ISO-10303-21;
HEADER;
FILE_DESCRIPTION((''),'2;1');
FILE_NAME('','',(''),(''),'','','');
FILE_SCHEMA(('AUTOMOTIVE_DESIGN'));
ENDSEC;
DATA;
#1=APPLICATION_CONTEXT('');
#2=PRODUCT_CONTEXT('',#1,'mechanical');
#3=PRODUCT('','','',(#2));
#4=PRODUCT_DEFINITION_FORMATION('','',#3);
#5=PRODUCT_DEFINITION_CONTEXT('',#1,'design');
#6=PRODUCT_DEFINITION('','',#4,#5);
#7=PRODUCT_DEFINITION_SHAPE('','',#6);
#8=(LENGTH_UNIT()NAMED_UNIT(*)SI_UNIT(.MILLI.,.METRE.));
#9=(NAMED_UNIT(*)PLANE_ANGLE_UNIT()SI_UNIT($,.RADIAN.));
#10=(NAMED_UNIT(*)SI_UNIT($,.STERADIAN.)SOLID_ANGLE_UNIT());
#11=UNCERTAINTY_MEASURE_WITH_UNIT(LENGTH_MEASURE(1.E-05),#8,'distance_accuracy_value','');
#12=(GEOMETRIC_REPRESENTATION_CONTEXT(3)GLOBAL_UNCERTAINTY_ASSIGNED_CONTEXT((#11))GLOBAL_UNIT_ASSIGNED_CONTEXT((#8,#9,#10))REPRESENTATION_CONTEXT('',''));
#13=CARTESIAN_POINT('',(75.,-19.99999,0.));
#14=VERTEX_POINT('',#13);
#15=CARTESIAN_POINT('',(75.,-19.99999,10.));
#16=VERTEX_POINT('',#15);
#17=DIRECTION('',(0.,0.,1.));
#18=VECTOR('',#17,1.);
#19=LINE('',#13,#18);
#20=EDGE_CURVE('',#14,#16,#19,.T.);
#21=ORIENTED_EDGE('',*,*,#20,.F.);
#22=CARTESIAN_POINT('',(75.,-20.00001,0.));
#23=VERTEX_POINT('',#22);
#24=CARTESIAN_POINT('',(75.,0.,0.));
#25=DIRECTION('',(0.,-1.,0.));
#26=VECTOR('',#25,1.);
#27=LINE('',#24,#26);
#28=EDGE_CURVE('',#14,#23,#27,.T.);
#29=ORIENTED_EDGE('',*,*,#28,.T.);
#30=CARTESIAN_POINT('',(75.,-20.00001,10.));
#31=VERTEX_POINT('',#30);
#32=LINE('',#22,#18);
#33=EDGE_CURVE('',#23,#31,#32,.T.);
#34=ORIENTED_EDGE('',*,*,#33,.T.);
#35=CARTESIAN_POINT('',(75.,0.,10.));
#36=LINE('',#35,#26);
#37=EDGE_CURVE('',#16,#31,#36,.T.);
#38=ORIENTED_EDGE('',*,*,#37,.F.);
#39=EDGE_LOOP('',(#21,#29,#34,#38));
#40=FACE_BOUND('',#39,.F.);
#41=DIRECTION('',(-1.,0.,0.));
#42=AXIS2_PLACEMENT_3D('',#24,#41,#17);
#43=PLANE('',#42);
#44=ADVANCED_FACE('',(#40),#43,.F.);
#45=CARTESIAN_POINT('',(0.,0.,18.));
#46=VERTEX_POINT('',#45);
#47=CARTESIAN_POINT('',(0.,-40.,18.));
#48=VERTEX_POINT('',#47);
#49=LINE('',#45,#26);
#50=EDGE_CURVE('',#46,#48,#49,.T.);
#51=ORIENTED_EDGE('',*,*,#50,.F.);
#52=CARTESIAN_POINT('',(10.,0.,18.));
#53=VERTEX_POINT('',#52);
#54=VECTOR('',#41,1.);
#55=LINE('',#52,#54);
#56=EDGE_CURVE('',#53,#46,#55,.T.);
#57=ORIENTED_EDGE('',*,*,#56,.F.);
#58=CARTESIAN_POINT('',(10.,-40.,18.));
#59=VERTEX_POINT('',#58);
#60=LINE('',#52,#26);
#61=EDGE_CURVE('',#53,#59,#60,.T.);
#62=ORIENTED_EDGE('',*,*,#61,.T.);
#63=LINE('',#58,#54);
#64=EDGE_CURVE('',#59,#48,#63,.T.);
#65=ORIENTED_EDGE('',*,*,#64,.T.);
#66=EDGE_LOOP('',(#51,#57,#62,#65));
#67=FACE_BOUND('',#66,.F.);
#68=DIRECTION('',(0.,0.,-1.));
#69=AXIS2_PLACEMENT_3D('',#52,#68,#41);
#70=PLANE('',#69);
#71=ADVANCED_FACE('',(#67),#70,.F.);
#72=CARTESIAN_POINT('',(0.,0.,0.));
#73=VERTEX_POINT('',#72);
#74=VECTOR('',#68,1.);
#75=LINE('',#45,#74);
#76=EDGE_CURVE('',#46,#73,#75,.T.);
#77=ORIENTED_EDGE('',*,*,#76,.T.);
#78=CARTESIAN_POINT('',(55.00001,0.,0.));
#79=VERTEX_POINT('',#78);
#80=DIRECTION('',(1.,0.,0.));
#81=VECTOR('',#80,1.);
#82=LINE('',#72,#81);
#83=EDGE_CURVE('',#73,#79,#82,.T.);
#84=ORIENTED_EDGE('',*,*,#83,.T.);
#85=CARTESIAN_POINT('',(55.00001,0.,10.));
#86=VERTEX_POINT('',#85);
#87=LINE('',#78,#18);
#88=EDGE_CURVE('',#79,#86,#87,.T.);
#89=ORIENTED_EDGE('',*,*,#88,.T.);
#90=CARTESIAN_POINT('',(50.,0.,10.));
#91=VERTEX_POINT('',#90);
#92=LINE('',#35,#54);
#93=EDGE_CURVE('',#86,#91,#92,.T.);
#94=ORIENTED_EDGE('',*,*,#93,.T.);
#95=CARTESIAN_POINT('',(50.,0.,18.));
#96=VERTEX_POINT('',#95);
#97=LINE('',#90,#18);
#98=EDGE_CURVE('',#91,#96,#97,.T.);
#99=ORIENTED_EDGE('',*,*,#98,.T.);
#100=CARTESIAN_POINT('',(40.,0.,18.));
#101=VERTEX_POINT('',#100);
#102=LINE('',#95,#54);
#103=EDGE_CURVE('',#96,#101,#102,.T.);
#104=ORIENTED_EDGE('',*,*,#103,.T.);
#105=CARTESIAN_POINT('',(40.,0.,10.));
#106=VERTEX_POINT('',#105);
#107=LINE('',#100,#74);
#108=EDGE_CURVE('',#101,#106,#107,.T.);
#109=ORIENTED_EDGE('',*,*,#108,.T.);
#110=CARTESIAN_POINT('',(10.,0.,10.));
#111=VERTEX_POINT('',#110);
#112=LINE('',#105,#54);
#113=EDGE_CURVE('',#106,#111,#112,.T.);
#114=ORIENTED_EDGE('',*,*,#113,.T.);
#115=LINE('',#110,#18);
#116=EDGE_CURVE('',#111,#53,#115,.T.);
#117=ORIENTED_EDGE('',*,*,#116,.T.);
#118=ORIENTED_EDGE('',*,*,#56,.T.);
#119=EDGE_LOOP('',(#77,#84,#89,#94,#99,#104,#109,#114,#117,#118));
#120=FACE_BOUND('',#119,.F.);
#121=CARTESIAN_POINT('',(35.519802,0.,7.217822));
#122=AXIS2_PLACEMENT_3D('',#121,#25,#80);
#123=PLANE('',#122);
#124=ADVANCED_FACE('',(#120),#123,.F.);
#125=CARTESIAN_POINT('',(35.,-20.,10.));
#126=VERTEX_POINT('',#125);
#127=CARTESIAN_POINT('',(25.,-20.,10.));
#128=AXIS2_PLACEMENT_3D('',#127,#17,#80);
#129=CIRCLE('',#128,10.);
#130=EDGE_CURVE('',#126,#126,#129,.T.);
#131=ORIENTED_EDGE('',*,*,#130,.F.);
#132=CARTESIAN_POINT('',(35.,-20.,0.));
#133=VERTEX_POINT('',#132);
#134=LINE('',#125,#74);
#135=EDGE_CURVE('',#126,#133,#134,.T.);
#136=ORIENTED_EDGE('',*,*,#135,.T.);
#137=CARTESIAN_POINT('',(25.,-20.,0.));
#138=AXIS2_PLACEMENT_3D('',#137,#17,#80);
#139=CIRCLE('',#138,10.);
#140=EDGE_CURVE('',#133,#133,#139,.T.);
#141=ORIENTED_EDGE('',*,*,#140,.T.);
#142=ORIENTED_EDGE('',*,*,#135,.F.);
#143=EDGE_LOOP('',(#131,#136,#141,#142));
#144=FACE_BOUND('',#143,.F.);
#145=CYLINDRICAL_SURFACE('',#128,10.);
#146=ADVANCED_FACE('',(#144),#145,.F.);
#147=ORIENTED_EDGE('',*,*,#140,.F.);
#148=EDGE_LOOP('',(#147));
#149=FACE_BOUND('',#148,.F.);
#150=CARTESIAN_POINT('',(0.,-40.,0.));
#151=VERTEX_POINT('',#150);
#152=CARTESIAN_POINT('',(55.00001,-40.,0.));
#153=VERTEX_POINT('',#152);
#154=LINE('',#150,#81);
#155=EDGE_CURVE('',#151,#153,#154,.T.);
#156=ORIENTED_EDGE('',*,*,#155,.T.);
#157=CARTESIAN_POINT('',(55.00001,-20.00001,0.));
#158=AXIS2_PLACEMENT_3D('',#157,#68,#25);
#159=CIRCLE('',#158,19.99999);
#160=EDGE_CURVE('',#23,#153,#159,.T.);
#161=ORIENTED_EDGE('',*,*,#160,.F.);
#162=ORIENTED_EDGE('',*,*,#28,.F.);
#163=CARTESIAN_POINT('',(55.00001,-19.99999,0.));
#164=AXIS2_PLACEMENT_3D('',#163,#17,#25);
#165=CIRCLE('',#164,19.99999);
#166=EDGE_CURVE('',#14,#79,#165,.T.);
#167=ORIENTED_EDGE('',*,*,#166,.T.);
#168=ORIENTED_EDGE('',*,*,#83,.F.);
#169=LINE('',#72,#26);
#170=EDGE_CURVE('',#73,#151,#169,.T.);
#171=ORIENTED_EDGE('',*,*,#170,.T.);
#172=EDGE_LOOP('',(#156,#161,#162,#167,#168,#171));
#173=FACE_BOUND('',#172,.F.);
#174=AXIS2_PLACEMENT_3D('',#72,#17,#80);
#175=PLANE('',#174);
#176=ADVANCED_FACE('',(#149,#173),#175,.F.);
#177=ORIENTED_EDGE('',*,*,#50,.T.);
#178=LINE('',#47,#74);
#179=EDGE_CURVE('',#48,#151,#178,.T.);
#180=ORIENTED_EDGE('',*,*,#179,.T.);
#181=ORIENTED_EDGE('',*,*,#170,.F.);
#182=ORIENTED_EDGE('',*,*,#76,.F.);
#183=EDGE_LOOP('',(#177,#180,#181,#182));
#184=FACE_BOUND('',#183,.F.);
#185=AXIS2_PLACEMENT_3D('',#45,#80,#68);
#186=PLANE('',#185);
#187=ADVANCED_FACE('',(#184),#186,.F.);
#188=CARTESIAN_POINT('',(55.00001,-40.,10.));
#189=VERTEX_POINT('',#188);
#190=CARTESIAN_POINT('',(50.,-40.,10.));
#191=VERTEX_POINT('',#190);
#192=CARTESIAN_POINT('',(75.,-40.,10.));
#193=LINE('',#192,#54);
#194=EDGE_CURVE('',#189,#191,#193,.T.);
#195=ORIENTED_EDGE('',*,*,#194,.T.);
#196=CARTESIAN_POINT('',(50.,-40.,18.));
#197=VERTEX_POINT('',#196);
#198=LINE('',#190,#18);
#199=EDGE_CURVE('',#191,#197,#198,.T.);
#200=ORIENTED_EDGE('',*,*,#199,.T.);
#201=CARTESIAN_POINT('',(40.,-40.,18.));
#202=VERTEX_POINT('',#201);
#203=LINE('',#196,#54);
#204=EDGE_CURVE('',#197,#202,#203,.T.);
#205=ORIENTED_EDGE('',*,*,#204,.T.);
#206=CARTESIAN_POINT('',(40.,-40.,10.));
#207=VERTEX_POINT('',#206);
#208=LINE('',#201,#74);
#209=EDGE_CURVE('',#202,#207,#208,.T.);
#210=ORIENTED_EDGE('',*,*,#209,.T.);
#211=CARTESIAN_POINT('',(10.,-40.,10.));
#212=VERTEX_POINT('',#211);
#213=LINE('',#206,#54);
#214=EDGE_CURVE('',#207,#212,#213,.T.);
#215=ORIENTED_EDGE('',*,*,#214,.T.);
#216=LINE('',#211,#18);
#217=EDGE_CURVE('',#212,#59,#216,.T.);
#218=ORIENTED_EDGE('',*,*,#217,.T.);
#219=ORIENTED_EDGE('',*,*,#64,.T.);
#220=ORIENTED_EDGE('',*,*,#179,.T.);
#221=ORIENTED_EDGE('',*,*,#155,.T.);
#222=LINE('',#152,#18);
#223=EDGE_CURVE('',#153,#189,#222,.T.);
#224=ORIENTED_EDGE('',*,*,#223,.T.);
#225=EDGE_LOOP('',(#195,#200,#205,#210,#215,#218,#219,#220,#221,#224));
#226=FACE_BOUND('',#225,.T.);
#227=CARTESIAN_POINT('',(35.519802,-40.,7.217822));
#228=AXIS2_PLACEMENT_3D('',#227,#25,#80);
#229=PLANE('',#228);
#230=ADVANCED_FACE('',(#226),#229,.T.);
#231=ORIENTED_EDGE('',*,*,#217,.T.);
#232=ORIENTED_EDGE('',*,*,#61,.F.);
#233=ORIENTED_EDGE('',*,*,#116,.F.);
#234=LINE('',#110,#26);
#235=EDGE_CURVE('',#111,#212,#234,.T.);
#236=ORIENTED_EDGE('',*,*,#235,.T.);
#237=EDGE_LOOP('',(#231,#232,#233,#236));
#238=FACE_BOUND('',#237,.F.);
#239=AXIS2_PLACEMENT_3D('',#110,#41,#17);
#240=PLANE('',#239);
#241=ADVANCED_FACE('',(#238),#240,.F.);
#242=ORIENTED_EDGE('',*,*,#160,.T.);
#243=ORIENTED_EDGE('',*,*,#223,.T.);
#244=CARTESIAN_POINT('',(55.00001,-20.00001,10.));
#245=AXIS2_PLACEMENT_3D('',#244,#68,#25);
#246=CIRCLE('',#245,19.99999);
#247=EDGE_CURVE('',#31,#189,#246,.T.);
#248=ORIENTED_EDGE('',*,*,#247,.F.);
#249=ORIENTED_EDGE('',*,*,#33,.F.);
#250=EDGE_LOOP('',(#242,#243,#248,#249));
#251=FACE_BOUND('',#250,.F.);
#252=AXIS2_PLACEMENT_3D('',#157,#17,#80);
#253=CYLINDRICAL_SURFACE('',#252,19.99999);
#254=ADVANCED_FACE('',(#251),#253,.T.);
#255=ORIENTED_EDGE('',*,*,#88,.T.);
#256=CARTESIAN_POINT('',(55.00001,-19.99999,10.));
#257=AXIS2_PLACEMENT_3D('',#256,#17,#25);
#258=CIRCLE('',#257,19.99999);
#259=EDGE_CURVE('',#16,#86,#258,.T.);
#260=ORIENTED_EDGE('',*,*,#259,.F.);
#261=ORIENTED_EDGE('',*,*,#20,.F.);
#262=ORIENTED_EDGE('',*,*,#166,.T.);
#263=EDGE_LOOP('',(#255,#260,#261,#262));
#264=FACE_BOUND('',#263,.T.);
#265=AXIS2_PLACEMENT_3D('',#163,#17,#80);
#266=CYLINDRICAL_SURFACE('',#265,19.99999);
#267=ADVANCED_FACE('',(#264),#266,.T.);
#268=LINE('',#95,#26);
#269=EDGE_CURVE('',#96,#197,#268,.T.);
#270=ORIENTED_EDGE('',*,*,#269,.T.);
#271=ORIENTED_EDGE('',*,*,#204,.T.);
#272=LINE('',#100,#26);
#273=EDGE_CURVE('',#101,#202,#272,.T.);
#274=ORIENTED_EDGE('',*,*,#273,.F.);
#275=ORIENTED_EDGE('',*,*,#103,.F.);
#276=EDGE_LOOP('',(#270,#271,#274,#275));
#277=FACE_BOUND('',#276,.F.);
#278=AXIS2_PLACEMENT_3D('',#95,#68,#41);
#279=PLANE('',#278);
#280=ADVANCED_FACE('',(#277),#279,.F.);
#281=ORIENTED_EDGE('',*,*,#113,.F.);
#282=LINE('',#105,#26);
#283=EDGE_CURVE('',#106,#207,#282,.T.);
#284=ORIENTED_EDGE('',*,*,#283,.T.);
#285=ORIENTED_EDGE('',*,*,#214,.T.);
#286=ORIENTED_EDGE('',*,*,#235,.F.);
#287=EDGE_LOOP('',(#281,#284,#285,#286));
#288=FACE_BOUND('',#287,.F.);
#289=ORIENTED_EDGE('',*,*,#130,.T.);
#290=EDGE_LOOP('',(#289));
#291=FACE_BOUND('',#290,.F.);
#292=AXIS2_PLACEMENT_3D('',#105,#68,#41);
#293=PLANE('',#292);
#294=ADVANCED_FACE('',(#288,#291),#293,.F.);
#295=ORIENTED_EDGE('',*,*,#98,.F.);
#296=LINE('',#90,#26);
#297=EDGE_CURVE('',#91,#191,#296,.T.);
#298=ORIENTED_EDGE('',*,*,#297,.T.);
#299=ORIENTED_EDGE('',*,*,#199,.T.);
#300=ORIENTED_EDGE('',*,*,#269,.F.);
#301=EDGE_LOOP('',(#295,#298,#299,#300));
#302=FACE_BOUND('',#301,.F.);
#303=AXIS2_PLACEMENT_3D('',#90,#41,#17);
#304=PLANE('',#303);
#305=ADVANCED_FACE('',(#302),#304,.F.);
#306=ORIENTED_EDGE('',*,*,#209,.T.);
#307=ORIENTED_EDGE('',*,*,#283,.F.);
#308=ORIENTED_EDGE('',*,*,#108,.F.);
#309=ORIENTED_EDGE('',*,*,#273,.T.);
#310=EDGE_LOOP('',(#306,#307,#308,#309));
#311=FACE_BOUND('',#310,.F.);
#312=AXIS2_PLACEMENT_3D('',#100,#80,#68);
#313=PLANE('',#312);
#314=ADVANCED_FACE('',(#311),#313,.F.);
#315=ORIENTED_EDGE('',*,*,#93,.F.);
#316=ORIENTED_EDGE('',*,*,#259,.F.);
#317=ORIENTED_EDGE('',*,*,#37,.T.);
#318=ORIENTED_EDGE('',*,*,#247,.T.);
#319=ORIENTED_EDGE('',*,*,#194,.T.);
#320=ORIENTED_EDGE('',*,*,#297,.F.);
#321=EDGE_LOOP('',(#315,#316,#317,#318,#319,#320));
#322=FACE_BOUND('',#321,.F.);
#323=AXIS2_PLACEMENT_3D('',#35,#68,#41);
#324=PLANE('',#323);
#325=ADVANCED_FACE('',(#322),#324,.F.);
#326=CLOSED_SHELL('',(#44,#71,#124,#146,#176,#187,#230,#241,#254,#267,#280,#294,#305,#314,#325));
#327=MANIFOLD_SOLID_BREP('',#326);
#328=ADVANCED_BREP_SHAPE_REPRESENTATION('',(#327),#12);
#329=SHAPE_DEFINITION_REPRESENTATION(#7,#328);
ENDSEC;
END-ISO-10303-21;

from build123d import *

# Parameters (mm, degrees)
F1_DEPTH = 40
F2_R     = 19.99999
F3_R     = 10
F4_DEPTH = 10


# Not quite as in the source:
# - a fillet or chamfer is up to 0.001 mm smaller than in the source, because OpenCascade refuses the exact size


with BuildPart() as f1:
    # F0 (on Front) → F1 (new body)
    with BuildSketch(Plane.XZ):
        Polygon((0, 18), (0, 0), (75, 0), (75, 10), (50, 10), (50, 18), (40, 18), (40, 10), (10, 10), (10, 18), align=None)
    extrude(amount=F1_DEPTH)

    # F2 (radius 20 in the source; OpenCascade refuses exactly that, so slightly less here)
    f2_edges = [f1.edges().sort_by_distance(p)[0] for p in [
        (75, -40, 5),
        (75, 0, 5),
    ]]
    fillet(f2_edges, radius=F2_R)

    # F3 (on face) → F4 (cut, through all)
    with BuildSketch(Plane.XY.offset(10)):
        with Locations((25, -20)):
            Circle(F3_R)
    extrude(amount=-F4_DEPTH, mode=Mode.SUBTRACT)


solid = f1.part
